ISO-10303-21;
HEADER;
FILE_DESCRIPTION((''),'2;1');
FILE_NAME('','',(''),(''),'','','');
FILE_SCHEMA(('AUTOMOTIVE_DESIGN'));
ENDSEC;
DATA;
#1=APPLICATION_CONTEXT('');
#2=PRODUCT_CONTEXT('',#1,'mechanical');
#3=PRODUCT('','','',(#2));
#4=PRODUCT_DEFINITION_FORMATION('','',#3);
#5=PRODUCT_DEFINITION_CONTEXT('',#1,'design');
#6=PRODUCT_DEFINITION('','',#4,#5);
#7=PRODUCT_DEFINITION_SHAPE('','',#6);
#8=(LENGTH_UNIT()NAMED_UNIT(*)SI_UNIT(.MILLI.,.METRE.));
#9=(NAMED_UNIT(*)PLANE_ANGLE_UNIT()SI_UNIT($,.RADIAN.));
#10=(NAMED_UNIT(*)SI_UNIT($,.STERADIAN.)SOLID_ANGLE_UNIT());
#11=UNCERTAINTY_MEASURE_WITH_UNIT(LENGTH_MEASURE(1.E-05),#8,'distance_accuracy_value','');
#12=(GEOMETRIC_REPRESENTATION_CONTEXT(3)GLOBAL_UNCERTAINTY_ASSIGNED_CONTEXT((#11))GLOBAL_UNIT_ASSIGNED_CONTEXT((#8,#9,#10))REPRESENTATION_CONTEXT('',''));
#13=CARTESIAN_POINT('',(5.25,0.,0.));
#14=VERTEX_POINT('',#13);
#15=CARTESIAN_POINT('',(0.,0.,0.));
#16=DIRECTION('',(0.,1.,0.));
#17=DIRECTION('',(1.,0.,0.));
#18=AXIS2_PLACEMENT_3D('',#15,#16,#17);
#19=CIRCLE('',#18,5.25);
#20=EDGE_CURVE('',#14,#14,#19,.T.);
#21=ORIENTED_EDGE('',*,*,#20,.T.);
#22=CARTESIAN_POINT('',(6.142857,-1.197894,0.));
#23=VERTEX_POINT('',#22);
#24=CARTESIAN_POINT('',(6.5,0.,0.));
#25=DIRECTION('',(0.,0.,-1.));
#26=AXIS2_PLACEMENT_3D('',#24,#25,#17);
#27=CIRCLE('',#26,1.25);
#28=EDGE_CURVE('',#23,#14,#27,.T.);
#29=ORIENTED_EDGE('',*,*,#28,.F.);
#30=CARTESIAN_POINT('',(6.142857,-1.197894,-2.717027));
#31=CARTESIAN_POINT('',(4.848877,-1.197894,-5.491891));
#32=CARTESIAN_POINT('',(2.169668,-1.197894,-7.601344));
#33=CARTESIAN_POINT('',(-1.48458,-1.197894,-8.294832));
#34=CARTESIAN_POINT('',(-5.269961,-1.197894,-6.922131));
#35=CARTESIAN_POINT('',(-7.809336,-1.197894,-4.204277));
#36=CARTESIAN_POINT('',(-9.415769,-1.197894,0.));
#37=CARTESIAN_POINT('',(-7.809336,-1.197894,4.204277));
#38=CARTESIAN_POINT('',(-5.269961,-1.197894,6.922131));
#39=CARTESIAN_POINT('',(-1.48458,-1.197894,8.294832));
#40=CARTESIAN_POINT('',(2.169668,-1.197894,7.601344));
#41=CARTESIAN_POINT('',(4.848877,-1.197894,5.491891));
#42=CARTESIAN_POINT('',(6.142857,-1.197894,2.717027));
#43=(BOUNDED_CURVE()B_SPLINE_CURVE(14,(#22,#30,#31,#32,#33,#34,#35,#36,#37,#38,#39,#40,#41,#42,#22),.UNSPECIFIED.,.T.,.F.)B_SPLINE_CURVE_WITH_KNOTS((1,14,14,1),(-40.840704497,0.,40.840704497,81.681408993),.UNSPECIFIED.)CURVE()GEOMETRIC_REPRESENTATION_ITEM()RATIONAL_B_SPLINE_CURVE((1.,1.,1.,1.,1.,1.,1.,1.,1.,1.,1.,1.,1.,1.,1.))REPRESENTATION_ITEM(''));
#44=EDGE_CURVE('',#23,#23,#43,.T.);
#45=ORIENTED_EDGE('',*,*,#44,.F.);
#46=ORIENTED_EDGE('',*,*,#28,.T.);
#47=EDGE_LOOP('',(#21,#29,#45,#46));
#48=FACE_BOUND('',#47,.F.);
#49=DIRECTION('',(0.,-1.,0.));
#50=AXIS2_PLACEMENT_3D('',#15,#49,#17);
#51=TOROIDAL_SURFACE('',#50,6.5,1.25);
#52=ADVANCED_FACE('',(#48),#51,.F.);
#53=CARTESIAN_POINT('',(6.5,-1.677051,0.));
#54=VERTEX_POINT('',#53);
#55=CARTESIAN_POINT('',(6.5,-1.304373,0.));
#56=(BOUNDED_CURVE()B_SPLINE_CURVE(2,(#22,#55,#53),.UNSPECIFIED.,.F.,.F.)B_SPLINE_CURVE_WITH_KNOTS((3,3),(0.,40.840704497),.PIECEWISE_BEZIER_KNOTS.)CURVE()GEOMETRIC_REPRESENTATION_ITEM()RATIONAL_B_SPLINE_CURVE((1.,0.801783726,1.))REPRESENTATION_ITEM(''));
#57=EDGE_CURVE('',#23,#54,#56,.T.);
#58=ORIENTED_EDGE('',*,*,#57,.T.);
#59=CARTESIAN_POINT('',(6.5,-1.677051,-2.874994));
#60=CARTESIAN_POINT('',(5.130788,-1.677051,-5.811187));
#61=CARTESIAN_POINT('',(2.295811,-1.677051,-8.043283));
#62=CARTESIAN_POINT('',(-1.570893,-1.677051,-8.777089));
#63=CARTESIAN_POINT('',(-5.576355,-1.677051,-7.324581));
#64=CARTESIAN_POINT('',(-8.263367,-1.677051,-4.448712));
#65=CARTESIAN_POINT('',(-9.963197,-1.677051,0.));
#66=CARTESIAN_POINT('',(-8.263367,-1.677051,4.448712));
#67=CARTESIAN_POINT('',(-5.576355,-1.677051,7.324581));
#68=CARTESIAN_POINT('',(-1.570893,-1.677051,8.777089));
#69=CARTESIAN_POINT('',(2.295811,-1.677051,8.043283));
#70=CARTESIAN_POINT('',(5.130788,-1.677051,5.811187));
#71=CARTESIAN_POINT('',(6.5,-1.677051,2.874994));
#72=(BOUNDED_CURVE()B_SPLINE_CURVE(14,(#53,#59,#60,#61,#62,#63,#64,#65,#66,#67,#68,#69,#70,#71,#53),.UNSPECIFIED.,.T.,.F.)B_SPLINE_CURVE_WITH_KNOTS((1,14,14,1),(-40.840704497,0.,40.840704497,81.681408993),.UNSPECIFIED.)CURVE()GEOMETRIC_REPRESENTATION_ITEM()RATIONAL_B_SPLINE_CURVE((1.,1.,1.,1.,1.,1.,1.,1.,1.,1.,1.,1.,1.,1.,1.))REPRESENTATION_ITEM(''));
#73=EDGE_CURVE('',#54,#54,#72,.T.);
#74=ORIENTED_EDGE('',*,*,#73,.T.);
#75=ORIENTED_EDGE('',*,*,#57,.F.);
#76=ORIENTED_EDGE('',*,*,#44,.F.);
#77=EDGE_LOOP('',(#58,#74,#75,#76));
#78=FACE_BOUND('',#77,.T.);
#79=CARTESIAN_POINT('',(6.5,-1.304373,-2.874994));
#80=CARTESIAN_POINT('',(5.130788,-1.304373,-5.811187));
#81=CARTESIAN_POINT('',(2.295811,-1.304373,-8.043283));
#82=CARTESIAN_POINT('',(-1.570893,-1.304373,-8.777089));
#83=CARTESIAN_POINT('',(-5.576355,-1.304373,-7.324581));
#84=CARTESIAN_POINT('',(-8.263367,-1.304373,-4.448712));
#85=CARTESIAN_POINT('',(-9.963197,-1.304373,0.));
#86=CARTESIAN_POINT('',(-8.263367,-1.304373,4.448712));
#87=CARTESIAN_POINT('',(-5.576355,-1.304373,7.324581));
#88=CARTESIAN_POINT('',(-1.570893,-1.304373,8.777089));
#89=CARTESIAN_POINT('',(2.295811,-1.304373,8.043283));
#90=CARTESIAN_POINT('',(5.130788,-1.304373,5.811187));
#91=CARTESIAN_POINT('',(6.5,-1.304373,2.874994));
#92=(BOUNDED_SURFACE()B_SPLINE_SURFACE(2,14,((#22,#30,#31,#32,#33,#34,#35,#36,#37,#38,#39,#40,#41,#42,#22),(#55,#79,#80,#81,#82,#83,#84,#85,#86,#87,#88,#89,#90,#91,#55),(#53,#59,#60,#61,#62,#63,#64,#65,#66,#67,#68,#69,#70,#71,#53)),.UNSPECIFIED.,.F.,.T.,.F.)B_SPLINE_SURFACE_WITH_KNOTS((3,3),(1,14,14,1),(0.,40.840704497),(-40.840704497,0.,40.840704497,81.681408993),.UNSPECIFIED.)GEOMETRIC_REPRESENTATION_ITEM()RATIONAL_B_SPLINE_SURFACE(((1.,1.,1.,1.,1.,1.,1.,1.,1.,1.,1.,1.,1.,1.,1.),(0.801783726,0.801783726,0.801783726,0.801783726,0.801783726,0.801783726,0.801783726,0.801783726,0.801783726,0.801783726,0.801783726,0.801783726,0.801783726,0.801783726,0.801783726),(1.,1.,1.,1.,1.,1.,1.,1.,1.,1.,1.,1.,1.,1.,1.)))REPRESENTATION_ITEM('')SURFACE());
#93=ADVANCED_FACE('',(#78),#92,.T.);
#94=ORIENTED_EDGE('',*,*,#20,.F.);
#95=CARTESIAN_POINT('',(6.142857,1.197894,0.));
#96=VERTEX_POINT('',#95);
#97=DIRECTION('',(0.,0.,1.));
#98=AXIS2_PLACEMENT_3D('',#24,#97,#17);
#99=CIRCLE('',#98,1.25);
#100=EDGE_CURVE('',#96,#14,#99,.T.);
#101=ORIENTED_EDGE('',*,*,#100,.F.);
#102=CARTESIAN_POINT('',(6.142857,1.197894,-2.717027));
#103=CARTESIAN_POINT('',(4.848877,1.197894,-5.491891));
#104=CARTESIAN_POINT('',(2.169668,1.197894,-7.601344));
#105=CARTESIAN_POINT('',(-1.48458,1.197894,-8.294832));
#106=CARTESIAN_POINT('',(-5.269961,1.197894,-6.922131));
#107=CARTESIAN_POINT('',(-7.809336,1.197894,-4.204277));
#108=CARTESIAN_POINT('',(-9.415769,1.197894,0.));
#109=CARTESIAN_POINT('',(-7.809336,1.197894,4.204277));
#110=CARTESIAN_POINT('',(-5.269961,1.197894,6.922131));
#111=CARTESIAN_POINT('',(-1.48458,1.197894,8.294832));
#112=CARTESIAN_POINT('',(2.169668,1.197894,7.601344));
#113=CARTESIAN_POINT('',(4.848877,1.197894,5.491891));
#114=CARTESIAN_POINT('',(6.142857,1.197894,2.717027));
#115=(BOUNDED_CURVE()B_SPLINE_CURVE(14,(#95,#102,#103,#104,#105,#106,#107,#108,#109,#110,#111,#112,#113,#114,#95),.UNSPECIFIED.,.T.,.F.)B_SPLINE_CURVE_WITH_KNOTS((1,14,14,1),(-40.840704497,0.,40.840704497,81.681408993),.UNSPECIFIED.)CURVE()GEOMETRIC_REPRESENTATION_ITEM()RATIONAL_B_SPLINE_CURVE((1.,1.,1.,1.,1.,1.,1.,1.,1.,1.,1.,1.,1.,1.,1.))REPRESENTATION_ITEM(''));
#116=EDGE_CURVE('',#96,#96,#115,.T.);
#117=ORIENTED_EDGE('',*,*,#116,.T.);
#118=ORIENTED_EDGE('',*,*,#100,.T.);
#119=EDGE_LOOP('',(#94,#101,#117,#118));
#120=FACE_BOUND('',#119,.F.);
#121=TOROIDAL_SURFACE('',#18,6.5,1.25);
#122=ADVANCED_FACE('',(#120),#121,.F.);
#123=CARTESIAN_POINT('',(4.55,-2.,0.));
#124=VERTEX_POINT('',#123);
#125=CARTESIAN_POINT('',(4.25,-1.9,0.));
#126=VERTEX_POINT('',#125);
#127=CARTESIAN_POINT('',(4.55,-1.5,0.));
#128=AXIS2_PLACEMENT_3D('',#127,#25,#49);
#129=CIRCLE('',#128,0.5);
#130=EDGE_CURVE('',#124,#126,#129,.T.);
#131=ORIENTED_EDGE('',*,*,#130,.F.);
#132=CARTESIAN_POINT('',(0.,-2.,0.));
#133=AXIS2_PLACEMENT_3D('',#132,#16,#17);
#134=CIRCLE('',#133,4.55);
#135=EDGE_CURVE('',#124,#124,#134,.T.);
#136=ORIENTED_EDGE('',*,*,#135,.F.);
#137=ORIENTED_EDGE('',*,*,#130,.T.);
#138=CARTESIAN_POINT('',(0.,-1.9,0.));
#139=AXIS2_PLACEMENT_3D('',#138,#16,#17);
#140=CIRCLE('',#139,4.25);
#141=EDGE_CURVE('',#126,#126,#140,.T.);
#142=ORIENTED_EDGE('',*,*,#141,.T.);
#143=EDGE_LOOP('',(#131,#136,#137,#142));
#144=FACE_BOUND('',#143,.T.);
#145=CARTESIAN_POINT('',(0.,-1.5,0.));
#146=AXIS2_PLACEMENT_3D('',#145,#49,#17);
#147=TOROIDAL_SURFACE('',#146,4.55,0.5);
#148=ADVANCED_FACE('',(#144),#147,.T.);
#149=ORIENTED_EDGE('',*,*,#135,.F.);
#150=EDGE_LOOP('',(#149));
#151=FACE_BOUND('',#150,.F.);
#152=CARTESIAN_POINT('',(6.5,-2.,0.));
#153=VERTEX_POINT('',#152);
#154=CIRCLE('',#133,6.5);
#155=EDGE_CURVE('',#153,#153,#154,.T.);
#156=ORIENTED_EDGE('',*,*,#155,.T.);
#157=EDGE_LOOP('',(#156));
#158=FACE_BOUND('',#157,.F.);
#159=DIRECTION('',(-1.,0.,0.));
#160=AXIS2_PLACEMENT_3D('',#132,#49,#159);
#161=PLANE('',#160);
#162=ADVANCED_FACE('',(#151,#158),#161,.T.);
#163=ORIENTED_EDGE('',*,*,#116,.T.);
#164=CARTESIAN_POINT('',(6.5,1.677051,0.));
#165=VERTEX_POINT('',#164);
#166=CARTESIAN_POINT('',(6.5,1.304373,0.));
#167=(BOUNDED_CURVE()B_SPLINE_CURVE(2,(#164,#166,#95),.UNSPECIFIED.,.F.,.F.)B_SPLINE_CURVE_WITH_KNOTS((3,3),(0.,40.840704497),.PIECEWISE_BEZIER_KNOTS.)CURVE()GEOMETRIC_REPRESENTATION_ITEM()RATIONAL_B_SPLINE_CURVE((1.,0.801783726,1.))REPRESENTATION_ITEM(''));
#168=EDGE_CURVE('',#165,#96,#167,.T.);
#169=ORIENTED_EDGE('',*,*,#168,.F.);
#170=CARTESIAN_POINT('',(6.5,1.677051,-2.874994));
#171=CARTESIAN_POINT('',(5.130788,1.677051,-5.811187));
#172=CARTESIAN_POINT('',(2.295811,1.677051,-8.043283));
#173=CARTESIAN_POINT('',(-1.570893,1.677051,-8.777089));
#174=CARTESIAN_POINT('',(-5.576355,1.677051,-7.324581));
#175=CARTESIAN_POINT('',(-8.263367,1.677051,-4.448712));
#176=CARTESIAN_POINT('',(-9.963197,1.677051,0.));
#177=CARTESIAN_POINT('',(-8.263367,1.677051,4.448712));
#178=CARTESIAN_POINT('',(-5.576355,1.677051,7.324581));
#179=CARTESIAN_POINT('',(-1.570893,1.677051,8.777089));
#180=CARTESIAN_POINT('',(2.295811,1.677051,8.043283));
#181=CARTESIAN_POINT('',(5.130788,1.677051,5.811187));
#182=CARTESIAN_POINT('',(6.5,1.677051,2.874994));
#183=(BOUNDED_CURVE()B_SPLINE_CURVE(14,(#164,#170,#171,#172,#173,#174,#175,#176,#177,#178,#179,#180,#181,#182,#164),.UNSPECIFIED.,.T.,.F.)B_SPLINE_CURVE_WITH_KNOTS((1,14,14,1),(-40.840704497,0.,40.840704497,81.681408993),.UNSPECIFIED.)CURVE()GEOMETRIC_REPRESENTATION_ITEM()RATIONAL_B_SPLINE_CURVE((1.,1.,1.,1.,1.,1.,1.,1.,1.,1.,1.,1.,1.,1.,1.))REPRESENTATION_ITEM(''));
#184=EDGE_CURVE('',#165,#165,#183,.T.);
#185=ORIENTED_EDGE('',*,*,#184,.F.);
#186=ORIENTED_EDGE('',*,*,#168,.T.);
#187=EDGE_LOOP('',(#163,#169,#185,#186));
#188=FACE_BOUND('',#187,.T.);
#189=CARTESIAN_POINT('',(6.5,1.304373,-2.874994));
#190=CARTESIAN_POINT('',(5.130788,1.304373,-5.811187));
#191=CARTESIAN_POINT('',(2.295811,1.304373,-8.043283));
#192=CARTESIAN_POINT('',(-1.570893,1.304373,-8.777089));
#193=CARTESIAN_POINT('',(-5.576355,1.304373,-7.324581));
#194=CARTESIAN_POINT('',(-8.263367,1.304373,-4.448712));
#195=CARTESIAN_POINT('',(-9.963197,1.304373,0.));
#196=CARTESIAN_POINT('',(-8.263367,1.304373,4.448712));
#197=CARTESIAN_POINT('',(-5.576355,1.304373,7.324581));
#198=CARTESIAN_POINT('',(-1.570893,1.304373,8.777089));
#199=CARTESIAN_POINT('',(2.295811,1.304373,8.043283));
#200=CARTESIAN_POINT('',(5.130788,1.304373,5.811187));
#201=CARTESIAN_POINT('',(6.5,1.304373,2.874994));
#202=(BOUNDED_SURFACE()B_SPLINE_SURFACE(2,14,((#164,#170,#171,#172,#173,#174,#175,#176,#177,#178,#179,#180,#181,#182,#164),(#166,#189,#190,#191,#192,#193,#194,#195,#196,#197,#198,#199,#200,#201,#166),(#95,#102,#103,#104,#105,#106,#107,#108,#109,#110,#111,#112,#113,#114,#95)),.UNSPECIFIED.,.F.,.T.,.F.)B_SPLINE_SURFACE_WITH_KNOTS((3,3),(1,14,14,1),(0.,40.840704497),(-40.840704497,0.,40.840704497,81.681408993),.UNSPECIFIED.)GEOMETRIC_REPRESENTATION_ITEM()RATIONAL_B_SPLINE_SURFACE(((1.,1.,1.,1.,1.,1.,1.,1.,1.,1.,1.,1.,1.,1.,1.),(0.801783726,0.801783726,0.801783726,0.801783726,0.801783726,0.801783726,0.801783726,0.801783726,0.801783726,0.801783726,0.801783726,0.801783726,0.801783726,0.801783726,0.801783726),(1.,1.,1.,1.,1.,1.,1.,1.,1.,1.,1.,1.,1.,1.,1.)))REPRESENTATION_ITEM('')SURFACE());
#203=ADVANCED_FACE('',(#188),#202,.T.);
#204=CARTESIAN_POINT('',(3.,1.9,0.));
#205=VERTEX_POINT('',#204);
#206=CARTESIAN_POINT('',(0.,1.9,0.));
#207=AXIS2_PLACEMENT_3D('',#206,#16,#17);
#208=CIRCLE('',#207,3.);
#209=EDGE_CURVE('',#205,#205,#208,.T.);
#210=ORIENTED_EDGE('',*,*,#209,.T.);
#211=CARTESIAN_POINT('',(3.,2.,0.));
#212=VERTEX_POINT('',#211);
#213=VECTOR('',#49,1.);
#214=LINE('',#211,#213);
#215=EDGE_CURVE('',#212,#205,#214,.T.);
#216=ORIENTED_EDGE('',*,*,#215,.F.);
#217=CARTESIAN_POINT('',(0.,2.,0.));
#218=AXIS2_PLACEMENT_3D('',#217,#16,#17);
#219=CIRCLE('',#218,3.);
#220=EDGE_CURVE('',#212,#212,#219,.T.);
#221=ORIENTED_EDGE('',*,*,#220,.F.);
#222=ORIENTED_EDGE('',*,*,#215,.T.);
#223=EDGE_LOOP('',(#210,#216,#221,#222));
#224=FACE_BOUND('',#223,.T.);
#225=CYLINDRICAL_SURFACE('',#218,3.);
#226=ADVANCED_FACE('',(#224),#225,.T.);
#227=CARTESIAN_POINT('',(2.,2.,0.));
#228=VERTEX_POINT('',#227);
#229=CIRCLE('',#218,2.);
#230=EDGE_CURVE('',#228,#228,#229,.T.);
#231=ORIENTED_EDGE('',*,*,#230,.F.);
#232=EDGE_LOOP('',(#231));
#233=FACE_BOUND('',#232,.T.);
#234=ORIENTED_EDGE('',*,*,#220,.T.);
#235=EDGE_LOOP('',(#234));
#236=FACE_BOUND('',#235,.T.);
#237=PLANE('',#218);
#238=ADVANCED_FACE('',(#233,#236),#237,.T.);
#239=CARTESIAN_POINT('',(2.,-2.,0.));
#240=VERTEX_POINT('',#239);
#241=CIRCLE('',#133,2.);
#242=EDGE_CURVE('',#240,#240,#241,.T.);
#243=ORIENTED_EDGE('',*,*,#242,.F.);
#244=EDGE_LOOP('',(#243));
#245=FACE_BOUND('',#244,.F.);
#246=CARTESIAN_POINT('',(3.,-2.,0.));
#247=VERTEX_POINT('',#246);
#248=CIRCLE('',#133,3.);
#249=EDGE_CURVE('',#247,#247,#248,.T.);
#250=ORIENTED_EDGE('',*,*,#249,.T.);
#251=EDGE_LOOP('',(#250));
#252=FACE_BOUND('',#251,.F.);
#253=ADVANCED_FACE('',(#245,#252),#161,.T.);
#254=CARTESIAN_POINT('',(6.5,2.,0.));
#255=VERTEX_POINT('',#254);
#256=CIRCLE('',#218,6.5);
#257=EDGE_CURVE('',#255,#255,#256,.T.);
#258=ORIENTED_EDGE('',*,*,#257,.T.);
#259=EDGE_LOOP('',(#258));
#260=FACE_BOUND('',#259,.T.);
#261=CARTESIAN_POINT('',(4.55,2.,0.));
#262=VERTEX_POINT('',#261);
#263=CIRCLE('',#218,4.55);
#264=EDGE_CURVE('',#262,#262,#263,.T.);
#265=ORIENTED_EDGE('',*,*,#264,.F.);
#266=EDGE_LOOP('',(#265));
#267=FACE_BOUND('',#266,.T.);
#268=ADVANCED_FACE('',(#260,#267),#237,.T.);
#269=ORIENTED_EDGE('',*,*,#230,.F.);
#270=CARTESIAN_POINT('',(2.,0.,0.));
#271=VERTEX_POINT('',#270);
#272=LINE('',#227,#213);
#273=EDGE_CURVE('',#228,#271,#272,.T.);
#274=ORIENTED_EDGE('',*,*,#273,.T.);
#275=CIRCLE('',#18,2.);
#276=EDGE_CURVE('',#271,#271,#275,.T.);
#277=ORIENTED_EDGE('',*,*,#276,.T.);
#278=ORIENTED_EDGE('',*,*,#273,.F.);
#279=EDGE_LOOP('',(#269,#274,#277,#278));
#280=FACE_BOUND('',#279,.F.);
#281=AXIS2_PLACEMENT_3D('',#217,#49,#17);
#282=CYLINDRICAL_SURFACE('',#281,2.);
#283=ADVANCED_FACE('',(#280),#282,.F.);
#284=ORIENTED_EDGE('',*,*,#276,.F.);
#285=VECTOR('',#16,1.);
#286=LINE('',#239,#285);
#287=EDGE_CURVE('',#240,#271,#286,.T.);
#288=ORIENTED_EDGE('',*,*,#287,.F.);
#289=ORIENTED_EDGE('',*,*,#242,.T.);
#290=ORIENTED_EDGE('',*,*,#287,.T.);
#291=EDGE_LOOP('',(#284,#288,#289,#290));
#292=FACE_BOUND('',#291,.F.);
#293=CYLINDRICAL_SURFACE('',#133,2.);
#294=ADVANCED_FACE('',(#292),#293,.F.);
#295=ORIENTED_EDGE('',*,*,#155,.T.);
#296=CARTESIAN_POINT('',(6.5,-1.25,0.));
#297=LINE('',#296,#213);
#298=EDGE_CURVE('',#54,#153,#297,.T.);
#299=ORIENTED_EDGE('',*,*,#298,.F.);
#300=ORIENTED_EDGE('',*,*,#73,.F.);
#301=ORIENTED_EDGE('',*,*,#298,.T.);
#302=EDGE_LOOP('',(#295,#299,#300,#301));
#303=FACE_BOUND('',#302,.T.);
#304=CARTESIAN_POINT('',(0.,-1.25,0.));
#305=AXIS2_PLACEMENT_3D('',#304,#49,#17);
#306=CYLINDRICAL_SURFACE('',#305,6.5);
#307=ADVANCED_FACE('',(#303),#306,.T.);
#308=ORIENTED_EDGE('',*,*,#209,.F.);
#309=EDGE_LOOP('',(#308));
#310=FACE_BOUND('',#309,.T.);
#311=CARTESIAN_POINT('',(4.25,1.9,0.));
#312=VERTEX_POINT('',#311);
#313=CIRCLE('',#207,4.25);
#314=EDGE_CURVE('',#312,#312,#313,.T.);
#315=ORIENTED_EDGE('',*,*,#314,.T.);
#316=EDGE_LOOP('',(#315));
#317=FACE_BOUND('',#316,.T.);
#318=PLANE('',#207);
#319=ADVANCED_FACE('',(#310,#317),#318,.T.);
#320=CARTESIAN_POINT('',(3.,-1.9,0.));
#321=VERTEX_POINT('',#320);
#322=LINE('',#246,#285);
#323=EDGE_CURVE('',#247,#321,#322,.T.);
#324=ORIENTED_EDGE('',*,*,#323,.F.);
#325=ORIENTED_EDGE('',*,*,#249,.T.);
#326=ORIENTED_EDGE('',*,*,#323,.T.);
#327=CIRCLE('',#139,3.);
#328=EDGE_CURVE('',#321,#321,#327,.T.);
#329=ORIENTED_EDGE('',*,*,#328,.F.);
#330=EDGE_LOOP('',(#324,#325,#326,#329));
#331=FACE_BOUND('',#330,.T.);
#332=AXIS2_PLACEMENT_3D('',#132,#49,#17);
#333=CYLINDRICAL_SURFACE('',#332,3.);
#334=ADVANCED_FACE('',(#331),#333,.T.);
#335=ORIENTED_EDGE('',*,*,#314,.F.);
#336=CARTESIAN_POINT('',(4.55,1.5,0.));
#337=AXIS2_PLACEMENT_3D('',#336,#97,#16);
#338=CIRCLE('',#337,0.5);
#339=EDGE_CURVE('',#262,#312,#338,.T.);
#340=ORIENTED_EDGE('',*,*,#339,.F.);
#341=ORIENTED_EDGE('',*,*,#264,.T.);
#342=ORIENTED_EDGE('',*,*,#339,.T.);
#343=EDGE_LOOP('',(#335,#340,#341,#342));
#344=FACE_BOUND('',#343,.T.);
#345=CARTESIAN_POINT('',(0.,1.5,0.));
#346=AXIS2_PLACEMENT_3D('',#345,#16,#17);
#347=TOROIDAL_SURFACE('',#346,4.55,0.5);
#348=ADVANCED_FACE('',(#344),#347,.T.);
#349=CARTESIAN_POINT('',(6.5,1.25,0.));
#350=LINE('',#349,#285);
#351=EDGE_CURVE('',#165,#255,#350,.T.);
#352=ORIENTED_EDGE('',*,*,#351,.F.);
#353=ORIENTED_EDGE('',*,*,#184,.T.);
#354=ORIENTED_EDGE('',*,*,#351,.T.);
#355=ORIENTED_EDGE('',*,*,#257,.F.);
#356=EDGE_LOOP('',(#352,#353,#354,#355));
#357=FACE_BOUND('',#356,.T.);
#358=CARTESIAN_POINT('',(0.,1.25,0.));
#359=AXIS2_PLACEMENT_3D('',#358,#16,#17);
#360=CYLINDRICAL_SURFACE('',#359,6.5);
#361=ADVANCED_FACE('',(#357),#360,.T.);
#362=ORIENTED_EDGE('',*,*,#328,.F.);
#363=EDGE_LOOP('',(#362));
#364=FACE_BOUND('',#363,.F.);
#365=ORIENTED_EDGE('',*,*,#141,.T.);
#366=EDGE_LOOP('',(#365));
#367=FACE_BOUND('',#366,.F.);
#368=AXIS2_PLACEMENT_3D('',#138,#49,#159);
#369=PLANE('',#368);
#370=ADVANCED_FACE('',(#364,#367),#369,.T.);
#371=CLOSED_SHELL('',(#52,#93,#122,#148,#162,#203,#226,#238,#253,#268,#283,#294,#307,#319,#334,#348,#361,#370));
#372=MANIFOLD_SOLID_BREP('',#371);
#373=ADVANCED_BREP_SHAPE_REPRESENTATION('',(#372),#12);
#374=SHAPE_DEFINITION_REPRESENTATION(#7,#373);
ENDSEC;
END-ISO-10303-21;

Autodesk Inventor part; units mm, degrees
ref_plane "YZ Plane" through (0, 0, 0) normal (1, 0, 0) x (0, 1, 0)
ref_plane "XZ Plane" through (0, 0, 0) normal (0, 1, 0) x (-1, 0, 0)
sketch "Sketch1" plane through (0, 0, 0) normal (0, 0, 1) x (1, 0, 0)
  line L0 (6.5, 2) -> (2, 2)
  line L1 (2, 2) -> (2, 0)
  line L2 (0, 0) -> (0, 12.2803)
  circle A0 centre (6.5, 0) radius 1.25
  line L3 (6.5, 1.25) -> (6.5, 2)
  line L4 (5.25, 0) -> (2, 0)
  dimension "d0" = 4.5
  dimension "d2" = 2
  dimension "d3" = 2.5
revolve "Revolution1" add sketch "Sketch1" angle 360 about axis through (0, 0, 0) along (0, 1, 0) contours L3 A0 L4 L1 L0
ref_plane "Work Plane1" through (0, 0, 0) normal (0, -1, 0) x (1, 0, 0)
sketch "Sketch2" plane through (0, 2, 0) normal (0, 1, 0) x (1, 0, 0)
  circle A0 centre (0, 0) radius 3
  circle A1 centre (0, 0) radius 4.25
  dimension "d6" = 6
  dimension "d7" = 8.5
extrude "Extrusion1" cut sketch "Sketch2" against normal blind 0.1
fillet "Fillet1" radius 0.5 1 edges at (-4.25, 2, 0)
mirror "Mirror1" about plane through (0, 0, 0) normal (0, -1, 0) of "Revolution1", "Extrusion1", "Fillet1"
fillet "Fillet2" radius 0.5 2 edges at (-6.5, -1.25, 0) (-6.5, 1.25, 0)
properties part number "idler bearing"
